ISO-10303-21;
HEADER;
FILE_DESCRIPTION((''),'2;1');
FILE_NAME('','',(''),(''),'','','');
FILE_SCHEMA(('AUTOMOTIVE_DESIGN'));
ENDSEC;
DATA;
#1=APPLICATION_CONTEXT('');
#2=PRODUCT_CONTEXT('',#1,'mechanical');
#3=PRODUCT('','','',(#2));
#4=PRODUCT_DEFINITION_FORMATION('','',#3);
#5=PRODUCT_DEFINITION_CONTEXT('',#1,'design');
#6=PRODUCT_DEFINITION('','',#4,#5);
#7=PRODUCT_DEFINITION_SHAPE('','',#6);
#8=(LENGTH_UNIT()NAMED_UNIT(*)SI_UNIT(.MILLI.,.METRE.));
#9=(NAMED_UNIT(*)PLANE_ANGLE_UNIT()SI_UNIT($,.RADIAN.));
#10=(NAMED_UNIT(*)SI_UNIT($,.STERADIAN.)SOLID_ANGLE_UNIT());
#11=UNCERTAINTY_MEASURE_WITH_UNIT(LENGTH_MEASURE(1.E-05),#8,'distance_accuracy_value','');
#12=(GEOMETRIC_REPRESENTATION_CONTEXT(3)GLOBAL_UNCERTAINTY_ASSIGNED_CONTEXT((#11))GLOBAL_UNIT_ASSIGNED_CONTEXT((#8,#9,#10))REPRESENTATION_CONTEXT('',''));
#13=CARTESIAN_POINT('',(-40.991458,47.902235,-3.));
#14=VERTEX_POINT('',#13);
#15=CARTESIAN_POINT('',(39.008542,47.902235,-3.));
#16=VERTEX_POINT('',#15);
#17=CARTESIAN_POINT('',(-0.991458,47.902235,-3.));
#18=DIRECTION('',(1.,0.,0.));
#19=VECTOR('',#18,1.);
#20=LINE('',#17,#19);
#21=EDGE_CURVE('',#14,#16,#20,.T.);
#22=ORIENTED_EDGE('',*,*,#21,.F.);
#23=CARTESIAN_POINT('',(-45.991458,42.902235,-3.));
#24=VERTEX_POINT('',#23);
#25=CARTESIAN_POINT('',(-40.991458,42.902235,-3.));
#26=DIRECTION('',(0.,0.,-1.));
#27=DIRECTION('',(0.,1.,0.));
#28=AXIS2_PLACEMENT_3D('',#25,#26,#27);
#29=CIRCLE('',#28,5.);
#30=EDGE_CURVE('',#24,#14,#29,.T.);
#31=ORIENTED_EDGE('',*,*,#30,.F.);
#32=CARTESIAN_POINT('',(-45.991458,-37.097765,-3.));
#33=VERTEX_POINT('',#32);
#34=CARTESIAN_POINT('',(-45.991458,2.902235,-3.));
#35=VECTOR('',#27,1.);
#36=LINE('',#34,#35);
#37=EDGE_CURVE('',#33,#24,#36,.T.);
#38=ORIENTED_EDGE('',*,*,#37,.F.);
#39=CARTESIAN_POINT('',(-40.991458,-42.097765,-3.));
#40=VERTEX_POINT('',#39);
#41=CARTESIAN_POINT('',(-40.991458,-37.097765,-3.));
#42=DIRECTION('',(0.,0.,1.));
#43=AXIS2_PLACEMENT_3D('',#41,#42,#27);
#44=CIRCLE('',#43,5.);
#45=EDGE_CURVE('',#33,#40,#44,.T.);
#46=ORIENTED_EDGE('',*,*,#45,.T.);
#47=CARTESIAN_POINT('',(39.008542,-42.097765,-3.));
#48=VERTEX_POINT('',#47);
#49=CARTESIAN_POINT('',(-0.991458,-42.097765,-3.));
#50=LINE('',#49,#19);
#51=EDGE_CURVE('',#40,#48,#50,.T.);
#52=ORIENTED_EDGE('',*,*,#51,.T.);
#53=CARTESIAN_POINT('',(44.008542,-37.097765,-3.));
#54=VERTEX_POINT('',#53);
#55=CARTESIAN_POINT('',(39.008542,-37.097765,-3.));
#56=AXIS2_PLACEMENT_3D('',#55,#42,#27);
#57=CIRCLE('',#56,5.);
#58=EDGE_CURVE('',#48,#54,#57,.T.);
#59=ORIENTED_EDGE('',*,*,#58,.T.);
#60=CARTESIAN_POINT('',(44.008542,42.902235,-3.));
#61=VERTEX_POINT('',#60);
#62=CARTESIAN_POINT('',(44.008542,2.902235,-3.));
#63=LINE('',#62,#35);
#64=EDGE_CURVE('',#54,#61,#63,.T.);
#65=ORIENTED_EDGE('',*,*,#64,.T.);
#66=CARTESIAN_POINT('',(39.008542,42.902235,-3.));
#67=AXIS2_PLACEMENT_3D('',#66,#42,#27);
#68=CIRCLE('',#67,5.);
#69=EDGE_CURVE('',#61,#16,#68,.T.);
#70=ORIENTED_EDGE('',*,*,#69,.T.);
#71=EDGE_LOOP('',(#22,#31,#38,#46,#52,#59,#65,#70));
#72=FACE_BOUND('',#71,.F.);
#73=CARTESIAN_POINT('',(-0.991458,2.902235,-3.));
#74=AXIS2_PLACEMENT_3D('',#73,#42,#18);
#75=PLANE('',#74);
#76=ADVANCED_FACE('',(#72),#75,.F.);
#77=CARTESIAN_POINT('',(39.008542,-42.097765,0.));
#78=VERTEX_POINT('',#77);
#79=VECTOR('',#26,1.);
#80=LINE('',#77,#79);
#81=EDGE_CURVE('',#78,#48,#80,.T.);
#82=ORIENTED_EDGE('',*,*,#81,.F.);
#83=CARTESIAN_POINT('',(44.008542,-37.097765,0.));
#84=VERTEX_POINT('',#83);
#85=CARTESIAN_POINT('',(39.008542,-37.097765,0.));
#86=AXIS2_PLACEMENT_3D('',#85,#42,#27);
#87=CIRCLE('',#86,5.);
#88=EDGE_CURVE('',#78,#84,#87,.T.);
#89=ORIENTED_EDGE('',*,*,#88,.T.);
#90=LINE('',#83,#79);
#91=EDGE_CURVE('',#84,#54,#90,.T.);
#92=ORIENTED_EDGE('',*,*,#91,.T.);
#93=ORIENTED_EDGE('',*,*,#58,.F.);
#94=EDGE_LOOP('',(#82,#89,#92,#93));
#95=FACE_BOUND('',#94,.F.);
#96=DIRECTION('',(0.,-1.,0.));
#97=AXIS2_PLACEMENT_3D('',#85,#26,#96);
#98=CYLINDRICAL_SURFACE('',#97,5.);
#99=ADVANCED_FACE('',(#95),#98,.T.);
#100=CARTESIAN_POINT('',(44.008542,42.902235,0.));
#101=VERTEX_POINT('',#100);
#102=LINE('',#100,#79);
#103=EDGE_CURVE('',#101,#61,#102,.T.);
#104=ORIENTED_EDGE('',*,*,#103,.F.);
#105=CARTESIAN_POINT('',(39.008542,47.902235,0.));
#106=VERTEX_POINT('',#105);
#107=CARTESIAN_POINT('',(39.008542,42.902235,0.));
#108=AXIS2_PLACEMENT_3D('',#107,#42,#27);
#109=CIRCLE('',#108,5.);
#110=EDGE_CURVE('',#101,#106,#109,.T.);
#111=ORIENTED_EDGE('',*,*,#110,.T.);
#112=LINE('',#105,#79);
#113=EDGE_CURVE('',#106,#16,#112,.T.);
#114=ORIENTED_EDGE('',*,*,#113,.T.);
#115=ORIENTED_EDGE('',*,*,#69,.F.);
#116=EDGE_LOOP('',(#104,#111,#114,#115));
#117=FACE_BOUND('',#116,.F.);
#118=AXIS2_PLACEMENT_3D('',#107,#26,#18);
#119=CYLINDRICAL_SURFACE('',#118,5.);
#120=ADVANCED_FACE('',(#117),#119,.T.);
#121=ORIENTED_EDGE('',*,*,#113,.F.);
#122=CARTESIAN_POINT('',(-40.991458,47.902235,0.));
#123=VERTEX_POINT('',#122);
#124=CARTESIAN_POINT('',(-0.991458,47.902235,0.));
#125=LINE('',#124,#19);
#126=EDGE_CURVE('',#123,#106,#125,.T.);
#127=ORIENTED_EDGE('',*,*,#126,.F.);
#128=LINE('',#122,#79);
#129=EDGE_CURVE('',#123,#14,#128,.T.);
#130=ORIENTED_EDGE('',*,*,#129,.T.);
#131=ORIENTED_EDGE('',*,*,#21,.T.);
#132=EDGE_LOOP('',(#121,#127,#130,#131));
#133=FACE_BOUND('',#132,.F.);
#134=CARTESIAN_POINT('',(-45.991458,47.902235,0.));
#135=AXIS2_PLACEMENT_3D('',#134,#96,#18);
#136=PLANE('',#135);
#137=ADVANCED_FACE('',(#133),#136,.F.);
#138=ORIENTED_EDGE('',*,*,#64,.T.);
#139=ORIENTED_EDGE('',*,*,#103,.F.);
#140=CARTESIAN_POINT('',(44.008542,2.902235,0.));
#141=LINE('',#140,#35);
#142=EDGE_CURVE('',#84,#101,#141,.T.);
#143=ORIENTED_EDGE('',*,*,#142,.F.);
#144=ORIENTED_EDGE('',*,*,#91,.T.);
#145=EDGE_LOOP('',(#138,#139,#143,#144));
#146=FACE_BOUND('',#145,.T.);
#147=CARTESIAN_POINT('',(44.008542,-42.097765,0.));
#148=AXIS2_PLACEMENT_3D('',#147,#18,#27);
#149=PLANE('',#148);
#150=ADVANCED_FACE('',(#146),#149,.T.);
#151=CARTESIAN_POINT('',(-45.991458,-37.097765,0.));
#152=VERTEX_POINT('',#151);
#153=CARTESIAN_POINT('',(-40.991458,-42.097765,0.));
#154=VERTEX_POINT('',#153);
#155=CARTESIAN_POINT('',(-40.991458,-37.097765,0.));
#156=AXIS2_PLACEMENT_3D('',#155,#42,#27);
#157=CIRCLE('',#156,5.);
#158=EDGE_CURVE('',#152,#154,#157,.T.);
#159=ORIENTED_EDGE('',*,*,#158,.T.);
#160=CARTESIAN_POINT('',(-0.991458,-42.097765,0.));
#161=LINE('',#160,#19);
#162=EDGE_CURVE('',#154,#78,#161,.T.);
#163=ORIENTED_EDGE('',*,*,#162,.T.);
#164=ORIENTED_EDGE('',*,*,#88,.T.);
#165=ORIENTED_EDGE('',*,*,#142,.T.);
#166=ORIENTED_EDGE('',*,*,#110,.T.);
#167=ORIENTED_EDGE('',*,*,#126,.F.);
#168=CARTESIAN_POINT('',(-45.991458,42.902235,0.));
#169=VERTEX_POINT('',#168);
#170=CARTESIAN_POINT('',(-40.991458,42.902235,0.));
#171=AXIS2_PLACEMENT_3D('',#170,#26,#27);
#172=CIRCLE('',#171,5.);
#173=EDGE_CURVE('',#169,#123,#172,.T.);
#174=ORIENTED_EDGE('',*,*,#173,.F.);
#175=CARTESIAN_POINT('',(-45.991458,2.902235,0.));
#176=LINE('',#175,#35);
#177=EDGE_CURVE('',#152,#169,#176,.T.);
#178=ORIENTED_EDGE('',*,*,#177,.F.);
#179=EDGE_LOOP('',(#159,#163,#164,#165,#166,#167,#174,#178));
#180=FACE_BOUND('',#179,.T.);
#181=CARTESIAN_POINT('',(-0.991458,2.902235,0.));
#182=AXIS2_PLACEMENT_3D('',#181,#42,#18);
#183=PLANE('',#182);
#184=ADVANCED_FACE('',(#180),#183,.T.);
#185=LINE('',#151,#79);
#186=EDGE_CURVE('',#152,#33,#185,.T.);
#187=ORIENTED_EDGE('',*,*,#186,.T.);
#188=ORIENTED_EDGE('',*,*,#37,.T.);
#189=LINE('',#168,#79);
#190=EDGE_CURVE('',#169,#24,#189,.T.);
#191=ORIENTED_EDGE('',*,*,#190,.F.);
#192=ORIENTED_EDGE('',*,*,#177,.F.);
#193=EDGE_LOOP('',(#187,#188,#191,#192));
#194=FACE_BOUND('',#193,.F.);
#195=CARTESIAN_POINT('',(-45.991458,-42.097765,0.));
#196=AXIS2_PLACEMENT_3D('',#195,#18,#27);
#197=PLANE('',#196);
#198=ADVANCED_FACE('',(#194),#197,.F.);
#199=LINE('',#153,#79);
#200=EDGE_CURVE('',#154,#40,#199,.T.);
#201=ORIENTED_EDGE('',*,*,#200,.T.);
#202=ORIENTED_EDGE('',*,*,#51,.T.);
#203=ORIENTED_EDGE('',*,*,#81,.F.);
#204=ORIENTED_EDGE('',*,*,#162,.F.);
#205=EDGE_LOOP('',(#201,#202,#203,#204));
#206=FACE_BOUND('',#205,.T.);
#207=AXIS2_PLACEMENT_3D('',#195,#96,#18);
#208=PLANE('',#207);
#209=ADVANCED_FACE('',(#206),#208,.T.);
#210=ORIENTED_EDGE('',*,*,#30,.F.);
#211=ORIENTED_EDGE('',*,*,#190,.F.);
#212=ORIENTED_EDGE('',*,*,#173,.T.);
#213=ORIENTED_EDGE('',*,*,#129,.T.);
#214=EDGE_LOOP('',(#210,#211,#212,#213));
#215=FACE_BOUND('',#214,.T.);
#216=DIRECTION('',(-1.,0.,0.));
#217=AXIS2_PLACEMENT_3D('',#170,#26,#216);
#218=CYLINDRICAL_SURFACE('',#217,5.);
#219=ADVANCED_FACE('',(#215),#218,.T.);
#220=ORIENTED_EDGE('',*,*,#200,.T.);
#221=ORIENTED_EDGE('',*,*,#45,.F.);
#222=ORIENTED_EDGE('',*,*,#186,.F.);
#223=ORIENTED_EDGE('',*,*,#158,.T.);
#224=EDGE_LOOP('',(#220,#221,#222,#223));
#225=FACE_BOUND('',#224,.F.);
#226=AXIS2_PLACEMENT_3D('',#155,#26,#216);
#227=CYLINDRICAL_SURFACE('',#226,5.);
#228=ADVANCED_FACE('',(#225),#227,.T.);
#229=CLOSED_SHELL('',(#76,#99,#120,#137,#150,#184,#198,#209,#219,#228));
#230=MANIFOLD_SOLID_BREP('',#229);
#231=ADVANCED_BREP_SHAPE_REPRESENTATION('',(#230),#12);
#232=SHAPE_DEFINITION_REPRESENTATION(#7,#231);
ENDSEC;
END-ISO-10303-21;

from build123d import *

# Parameters (mm, degrees)
F0_W     = 90
F0_H     = 90
F1_DEPTH = 3
F2_R     = 5


# Not quite as in the source:
# - a feature of the source that left no trace in its solid (it failed there, or was rolled back) is left out


with BuildPart() as f1:
    # F0 (on Top) → F1 (new body)
    with BuildSketch(Plane.XY):
        with Locations((-0.9914580733, 2.9022350864)):
            Rectangle(F0_W, F0_H)
    extrude(amount=-F1_DEPTH)

    # F2
    f2_edges = [f1.edges().sort_by_distance(p)[0] for p in [
        (-45.991458, 47.902235, -1.5),
        (44.008542, 47.902235, -1.5),
        (-45.991458, -42.097765, -1.5),
        (44.008542, -42.097765, -1.5),
    ]]
    fillet(f2_edges, radius=F2_R)


solid = f1.part
